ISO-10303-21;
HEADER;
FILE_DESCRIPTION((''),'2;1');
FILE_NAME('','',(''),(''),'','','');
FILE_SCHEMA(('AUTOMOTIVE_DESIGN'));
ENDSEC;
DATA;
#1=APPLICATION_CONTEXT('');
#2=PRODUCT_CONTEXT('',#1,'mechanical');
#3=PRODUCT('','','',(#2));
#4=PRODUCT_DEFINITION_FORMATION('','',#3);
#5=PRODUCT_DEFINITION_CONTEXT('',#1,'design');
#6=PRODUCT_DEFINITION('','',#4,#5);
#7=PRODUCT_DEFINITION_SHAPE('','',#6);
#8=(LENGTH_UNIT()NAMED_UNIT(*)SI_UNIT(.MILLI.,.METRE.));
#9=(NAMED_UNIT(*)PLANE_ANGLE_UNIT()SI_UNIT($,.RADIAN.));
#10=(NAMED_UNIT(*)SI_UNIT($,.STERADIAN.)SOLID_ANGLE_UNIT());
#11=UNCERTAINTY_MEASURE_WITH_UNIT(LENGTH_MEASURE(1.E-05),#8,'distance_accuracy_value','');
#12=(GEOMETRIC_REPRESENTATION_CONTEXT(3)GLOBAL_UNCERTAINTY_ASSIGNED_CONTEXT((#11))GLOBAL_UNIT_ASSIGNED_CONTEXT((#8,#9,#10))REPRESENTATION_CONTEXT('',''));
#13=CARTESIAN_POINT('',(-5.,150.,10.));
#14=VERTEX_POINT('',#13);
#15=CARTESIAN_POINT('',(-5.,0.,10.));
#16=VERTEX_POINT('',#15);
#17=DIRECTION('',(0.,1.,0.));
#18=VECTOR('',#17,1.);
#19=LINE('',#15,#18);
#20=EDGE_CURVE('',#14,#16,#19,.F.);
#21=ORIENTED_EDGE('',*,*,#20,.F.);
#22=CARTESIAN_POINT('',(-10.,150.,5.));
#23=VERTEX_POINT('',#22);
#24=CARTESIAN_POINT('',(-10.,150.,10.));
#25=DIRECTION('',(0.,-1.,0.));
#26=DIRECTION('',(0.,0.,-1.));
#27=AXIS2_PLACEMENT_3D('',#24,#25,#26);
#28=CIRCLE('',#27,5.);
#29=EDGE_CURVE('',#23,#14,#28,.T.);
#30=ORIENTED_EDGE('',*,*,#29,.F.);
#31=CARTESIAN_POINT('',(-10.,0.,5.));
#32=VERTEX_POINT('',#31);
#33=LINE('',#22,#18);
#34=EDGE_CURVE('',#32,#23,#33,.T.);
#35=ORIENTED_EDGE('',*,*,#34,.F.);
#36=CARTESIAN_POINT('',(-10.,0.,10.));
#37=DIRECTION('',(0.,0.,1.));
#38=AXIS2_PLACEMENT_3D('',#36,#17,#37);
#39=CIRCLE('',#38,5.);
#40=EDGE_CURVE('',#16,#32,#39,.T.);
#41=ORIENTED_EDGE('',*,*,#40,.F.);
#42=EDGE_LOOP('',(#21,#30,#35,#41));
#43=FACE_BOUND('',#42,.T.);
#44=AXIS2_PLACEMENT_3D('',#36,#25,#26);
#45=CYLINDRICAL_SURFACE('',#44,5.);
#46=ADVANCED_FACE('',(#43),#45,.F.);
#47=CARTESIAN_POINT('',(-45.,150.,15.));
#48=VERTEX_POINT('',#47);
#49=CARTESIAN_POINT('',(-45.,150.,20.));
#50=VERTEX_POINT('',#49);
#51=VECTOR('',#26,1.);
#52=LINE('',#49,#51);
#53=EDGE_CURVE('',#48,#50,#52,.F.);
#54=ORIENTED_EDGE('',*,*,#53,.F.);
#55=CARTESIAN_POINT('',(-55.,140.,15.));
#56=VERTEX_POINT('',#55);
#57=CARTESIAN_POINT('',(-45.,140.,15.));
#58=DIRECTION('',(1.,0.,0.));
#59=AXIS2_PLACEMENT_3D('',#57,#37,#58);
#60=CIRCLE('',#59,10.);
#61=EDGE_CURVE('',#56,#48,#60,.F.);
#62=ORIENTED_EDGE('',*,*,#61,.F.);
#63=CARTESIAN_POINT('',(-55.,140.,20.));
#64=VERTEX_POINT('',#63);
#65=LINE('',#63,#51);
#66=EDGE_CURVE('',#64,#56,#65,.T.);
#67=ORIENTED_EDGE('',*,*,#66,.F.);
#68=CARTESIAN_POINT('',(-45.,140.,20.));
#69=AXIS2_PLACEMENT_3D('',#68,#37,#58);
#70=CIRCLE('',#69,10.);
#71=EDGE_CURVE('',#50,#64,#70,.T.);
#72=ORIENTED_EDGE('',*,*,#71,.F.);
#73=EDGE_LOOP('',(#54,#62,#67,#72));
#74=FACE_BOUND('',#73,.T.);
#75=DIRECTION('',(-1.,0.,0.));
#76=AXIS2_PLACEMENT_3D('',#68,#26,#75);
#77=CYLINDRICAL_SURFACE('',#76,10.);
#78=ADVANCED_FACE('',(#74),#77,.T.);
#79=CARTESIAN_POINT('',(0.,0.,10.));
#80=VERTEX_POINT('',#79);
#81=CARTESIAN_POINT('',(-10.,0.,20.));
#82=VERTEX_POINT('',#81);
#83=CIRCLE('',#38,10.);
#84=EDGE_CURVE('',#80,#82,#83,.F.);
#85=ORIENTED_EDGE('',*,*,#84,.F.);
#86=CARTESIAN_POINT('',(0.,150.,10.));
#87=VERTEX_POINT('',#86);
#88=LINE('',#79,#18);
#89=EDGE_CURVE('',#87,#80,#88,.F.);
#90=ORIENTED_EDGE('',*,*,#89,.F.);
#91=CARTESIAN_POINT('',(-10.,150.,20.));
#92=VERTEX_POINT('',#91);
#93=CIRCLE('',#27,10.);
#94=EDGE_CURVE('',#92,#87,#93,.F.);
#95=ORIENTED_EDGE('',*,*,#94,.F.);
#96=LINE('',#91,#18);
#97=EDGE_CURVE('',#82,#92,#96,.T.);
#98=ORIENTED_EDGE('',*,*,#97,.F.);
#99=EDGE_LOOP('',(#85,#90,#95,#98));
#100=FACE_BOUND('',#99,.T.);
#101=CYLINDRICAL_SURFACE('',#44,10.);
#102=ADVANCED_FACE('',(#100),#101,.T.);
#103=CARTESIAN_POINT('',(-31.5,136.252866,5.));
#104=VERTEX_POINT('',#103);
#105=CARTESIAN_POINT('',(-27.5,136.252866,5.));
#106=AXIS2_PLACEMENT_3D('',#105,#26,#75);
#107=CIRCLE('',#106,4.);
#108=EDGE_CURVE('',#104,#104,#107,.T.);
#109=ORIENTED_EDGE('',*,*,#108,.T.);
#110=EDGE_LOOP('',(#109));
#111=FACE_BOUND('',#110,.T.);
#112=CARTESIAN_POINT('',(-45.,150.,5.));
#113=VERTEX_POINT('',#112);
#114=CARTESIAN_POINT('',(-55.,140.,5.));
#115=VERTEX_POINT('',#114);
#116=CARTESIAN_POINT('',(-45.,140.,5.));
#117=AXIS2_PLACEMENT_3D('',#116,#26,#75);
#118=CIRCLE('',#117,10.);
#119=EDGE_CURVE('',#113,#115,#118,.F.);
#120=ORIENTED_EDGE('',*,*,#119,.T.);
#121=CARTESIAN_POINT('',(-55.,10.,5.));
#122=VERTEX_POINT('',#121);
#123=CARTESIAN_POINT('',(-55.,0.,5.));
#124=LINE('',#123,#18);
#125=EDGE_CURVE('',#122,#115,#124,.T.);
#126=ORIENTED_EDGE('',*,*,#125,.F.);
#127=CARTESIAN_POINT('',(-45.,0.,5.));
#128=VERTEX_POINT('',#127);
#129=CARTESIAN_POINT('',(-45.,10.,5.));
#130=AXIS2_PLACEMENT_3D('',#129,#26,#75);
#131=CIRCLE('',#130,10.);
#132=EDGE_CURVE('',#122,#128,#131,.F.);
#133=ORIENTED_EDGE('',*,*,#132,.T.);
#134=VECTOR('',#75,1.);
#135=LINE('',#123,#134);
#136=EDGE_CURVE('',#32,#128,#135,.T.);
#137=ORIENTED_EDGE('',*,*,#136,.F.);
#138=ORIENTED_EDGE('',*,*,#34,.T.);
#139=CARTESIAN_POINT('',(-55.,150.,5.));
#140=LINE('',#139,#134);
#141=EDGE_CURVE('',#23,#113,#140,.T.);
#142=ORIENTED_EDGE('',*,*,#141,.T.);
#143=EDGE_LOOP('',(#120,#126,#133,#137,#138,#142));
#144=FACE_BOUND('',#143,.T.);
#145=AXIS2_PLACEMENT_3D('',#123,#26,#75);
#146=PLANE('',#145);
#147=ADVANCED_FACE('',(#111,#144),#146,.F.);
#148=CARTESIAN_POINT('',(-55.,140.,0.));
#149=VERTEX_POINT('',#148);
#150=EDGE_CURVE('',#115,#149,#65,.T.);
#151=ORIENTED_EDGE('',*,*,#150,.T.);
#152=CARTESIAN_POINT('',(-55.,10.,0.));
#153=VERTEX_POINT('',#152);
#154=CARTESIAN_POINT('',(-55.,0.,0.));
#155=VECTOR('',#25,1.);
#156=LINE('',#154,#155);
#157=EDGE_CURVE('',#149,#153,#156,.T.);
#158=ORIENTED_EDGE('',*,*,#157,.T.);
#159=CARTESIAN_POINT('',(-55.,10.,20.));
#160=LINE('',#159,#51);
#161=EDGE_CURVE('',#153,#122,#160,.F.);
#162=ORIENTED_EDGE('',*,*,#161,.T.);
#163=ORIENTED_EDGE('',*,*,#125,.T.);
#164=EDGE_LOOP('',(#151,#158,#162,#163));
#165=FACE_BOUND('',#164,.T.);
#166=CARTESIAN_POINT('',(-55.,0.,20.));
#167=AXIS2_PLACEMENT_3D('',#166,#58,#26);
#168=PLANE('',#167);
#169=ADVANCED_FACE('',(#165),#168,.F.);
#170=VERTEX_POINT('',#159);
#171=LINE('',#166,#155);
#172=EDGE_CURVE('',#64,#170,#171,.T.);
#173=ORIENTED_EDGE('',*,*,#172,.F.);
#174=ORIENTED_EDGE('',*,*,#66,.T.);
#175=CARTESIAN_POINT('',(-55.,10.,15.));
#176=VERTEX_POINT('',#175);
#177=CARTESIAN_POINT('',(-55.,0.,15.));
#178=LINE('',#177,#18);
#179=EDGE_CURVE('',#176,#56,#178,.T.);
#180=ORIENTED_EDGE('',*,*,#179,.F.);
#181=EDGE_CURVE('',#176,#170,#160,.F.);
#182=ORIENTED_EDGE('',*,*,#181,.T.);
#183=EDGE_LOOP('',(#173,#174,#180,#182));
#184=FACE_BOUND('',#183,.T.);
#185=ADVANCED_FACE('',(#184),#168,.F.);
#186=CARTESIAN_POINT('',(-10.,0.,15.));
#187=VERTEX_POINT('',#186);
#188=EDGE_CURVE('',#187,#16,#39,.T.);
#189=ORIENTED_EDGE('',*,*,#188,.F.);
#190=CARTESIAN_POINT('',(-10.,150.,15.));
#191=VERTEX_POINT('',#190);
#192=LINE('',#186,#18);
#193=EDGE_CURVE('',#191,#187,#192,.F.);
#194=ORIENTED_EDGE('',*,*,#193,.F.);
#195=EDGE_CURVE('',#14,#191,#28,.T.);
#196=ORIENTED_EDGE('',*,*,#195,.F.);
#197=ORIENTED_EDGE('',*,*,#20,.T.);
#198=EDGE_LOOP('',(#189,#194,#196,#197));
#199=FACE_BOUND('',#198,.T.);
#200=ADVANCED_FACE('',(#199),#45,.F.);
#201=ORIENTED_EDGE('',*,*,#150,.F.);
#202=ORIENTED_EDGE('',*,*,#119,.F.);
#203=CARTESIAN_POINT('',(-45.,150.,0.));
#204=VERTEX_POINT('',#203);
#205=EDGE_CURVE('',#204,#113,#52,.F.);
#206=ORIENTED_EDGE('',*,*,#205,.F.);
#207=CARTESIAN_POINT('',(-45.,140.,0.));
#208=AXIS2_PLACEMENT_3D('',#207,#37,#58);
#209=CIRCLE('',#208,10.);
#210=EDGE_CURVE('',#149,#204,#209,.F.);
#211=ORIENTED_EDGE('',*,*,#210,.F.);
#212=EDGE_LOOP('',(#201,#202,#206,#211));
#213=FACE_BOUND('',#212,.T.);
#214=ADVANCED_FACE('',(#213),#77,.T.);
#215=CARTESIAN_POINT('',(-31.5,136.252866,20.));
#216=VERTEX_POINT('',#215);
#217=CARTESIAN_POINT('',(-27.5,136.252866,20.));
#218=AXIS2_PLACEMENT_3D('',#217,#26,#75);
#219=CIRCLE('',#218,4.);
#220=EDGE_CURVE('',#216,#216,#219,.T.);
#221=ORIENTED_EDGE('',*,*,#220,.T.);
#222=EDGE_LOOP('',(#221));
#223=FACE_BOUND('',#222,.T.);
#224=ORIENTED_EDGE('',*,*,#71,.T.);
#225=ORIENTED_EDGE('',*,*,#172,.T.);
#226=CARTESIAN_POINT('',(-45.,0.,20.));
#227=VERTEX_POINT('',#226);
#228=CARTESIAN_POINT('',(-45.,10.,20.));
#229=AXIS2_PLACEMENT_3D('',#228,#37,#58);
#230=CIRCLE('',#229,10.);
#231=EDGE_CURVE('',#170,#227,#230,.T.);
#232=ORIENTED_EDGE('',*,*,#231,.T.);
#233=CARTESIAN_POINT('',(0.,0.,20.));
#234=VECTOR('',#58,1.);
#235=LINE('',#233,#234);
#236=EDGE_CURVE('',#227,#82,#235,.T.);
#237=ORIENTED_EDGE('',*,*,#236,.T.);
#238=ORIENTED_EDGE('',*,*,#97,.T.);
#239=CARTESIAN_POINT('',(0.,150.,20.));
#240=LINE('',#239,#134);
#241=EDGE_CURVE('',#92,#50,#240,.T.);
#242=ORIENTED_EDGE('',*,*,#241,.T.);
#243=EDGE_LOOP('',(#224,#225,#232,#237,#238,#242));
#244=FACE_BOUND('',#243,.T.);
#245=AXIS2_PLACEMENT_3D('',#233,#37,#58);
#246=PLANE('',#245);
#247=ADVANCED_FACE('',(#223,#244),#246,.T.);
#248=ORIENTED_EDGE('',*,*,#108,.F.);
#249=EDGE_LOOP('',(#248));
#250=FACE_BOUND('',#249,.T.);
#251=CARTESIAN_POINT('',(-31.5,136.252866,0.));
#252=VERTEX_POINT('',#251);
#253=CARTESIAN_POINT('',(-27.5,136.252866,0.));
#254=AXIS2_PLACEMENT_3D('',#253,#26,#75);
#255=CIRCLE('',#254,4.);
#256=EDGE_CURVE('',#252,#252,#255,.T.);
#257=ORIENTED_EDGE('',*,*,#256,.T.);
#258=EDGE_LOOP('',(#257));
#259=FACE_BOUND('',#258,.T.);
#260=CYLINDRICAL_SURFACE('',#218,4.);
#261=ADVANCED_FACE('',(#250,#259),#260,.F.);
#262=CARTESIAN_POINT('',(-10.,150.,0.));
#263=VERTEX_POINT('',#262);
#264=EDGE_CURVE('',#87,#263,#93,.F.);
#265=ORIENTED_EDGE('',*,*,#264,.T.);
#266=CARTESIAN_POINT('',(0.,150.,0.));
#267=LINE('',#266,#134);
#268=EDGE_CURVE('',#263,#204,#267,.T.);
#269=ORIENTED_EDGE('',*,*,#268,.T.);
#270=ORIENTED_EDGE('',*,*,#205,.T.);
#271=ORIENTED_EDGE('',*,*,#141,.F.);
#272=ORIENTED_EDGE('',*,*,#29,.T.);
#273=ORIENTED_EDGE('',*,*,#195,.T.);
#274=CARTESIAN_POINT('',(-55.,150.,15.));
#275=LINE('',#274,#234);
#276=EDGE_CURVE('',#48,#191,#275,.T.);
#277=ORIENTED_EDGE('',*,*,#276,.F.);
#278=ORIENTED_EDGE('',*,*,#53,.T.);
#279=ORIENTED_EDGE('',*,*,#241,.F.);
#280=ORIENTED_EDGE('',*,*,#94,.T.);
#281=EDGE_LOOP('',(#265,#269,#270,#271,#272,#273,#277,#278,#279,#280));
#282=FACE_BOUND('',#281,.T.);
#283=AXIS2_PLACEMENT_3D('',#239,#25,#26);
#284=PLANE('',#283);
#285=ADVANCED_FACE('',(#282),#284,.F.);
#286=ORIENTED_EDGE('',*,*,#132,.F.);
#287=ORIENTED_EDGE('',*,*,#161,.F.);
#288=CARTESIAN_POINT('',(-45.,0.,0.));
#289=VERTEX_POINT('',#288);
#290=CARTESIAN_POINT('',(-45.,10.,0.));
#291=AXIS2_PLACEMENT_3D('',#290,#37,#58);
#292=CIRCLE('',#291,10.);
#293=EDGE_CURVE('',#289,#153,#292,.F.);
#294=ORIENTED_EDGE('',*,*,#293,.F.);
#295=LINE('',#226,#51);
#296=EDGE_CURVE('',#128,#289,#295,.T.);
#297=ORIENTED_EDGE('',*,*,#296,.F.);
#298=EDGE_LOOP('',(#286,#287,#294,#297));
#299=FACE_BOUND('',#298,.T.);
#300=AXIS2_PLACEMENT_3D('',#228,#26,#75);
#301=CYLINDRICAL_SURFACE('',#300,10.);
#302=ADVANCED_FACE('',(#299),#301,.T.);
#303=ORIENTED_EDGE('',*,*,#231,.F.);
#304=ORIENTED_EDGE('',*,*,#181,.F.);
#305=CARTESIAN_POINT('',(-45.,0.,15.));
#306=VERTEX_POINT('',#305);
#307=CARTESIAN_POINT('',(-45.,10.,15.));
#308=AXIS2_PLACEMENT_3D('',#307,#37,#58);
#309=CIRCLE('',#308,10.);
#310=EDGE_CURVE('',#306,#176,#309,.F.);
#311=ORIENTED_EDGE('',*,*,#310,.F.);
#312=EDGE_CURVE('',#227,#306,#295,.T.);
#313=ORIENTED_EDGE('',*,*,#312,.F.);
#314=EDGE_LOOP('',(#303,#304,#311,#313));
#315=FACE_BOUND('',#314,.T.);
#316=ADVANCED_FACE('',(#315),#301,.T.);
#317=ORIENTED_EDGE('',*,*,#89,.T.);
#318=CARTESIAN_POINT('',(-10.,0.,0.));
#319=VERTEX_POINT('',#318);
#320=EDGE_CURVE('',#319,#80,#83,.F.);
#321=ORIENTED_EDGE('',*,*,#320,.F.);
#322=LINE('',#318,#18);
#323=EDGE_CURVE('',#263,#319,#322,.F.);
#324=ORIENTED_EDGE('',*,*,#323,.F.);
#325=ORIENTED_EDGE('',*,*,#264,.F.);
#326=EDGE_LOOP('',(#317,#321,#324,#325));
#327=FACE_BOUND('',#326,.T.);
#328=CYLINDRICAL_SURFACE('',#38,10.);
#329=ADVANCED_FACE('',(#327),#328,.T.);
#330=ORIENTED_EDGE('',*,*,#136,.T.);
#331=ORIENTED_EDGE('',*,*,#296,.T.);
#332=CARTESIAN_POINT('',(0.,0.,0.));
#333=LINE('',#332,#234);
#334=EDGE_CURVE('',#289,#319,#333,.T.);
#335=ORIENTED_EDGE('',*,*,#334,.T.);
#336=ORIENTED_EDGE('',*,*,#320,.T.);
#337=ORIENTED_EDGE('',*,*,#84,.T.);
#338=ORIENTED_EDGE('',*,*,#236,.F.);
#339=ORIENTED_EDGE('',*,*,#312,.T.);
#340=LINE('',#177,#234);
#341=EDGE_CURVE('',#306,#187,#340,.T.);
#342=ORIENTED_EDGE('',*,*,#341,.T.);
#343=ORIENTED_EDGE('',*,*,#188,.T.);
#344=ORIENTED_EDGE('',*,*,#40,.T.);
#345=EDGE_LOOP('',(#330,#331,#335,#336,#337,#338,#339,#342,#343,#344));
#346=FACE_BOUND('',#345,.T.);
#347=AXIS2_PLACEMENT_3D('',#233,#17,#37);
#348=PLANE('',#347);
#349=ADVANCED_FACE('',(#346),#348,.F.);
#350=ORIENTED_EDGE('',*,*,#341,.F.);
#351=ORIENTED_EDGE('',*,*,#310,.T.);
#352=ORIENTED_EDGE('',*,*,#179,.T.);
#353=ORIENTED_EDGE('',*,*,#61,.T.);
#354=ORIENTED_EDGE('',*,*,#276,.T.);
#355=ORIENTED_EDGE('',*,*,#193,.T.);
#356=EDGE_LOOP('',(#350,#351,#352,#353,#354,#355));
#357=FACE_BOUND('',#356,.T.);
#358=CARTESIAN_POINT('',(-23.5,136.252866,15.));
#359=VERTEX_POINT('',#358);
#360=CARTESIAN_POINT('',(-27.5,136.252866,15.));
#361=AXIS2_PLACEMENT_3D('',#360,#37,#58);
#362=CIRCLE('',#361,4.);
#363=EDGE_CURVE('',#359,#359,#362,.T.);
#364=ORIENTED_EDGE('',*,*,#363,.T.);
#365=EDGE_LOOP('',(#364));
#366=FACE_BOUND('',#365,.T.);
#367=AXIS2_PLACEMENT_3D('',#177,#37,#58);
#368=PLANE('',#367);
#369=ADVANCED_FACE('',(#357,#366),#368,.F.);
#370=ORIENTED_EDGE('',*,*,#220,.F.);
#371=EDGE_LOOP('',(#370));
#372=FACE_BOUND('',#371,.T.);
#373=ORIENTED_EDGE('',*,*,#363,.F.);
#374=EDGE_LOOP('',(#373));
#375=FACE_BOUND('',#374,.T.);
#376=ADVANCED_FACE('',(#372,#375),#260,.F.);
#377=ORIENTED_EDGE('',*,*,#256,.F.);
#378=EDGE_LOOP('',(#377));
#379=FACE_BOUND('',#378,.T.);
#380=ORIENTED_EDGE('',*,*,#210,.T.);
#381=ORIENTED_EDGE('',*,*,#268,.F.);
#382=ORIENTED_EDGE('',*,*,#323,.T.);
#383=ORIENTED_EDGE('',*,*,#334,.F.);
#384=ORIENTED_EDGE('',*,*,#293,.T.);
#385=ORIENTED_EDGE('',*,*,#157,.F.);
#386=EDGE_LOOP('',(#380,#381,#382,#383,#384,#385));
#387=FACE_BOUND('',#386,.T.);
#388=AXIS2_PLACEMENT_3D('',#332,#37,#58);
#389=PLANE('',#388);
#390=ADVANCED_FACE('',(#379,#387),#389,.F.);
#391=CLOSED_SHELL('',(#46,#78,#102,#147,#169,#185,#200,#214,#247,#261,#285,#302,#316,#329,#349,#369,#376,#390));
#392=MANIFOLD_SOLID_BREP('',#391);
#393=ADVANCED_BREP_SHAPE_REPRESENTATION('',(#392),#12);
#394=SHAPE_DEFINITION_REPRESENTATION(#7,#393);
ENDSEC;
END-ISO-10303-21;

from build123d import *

# Parameters (mm, degrees)
ESQUISSE1_W             = 55
ESQUISSE1_H             = 150
BOSS_EXTRU_1_DEPTH      = 20
ESQUISSE2_W             = 50
ESQUISSE2_H             = 10
ENL_V_MAT_EXTRU_1_DEPTH = 162.012421881
ESQUISSE3_R             = 4
ENL_V_MAT_EXTRU_2_DEPTH = 20
CONG_1_R                = 5
CONG_2_R                = 10
CONG_3_R                = 10


with BuildPart() as part:
    # Esquisse1 → Boss.-Extru.1 (new body)
    with BuildSketch(Plane.XY):
        with Locations((-27.5, 75)):
            Rectangle(ESQUISSE1_W, ESQUISSE1_H)
    extrude(amount=BOSS_EXTRU_1_DEPTH)

    # Esquisse2 → Enlèv. mat.-Extru.1 (cut, through all)
    with BuildSketch(Plane(origin=(0, 150, 0), x_dir=(1, 0, 0), z_dir=(0, 1, 0))):
        with Locations((-30, -10)):
            Rectangle(ESQUISSE2_W, ESQUISSE2_H)
    extrude(amount=-ENL_V_MAT_EXTRU_1_DEPTH, mode=Mode.SUBTRACT)

    # Esquisse3 → Enlèv. mat.-Extru.2 (cut)
    with BuildSketch(Plane(origin=(0, 0, 0), x_dir=(-1, 0, 0), z_dir=(0, 0, -1))):
        with Locations((27.5, 136.25286599)):
            Circle(ESQUISSE3_R)
    extrude(amount=-ENL_V_MAT_EXTRU_2_DEPTH, mode=Mode.SUBTRACT)

    # Congé1
    cong_1_edges = [part.edges().sort_by_distance(p)[0] for p in [
        (-5, 75, 15),
        (-5, 75, 5),
    ]]
    fillet(cong_1_edges, radius=CONG_1_R - 0.0001)  # a hair under: the kernel refuses the full size

    # Congé2
    cong_2_edges = [part.edges().sort_by_distance(p)[0] for p in [
        (0, 75, 0),
        (0, 75, 20),
    ]]
    fillet(cong_2_edges, radius=CONG_2_R - 0.0001)  # a hair under: the kernel refuses the full size

    # Congé3
    cong_3_edges = [part.edges().sort_by_distance(p)[0] for p in [
        (-55, 0, 2.5),
        (-55, 150, 2.5),
        (-55, 0, 17.5),
        (-55, 150, 17.5),
    ]]
    fillet(cong_3_edges, radius=CONG_3_R)


solid = part.part
